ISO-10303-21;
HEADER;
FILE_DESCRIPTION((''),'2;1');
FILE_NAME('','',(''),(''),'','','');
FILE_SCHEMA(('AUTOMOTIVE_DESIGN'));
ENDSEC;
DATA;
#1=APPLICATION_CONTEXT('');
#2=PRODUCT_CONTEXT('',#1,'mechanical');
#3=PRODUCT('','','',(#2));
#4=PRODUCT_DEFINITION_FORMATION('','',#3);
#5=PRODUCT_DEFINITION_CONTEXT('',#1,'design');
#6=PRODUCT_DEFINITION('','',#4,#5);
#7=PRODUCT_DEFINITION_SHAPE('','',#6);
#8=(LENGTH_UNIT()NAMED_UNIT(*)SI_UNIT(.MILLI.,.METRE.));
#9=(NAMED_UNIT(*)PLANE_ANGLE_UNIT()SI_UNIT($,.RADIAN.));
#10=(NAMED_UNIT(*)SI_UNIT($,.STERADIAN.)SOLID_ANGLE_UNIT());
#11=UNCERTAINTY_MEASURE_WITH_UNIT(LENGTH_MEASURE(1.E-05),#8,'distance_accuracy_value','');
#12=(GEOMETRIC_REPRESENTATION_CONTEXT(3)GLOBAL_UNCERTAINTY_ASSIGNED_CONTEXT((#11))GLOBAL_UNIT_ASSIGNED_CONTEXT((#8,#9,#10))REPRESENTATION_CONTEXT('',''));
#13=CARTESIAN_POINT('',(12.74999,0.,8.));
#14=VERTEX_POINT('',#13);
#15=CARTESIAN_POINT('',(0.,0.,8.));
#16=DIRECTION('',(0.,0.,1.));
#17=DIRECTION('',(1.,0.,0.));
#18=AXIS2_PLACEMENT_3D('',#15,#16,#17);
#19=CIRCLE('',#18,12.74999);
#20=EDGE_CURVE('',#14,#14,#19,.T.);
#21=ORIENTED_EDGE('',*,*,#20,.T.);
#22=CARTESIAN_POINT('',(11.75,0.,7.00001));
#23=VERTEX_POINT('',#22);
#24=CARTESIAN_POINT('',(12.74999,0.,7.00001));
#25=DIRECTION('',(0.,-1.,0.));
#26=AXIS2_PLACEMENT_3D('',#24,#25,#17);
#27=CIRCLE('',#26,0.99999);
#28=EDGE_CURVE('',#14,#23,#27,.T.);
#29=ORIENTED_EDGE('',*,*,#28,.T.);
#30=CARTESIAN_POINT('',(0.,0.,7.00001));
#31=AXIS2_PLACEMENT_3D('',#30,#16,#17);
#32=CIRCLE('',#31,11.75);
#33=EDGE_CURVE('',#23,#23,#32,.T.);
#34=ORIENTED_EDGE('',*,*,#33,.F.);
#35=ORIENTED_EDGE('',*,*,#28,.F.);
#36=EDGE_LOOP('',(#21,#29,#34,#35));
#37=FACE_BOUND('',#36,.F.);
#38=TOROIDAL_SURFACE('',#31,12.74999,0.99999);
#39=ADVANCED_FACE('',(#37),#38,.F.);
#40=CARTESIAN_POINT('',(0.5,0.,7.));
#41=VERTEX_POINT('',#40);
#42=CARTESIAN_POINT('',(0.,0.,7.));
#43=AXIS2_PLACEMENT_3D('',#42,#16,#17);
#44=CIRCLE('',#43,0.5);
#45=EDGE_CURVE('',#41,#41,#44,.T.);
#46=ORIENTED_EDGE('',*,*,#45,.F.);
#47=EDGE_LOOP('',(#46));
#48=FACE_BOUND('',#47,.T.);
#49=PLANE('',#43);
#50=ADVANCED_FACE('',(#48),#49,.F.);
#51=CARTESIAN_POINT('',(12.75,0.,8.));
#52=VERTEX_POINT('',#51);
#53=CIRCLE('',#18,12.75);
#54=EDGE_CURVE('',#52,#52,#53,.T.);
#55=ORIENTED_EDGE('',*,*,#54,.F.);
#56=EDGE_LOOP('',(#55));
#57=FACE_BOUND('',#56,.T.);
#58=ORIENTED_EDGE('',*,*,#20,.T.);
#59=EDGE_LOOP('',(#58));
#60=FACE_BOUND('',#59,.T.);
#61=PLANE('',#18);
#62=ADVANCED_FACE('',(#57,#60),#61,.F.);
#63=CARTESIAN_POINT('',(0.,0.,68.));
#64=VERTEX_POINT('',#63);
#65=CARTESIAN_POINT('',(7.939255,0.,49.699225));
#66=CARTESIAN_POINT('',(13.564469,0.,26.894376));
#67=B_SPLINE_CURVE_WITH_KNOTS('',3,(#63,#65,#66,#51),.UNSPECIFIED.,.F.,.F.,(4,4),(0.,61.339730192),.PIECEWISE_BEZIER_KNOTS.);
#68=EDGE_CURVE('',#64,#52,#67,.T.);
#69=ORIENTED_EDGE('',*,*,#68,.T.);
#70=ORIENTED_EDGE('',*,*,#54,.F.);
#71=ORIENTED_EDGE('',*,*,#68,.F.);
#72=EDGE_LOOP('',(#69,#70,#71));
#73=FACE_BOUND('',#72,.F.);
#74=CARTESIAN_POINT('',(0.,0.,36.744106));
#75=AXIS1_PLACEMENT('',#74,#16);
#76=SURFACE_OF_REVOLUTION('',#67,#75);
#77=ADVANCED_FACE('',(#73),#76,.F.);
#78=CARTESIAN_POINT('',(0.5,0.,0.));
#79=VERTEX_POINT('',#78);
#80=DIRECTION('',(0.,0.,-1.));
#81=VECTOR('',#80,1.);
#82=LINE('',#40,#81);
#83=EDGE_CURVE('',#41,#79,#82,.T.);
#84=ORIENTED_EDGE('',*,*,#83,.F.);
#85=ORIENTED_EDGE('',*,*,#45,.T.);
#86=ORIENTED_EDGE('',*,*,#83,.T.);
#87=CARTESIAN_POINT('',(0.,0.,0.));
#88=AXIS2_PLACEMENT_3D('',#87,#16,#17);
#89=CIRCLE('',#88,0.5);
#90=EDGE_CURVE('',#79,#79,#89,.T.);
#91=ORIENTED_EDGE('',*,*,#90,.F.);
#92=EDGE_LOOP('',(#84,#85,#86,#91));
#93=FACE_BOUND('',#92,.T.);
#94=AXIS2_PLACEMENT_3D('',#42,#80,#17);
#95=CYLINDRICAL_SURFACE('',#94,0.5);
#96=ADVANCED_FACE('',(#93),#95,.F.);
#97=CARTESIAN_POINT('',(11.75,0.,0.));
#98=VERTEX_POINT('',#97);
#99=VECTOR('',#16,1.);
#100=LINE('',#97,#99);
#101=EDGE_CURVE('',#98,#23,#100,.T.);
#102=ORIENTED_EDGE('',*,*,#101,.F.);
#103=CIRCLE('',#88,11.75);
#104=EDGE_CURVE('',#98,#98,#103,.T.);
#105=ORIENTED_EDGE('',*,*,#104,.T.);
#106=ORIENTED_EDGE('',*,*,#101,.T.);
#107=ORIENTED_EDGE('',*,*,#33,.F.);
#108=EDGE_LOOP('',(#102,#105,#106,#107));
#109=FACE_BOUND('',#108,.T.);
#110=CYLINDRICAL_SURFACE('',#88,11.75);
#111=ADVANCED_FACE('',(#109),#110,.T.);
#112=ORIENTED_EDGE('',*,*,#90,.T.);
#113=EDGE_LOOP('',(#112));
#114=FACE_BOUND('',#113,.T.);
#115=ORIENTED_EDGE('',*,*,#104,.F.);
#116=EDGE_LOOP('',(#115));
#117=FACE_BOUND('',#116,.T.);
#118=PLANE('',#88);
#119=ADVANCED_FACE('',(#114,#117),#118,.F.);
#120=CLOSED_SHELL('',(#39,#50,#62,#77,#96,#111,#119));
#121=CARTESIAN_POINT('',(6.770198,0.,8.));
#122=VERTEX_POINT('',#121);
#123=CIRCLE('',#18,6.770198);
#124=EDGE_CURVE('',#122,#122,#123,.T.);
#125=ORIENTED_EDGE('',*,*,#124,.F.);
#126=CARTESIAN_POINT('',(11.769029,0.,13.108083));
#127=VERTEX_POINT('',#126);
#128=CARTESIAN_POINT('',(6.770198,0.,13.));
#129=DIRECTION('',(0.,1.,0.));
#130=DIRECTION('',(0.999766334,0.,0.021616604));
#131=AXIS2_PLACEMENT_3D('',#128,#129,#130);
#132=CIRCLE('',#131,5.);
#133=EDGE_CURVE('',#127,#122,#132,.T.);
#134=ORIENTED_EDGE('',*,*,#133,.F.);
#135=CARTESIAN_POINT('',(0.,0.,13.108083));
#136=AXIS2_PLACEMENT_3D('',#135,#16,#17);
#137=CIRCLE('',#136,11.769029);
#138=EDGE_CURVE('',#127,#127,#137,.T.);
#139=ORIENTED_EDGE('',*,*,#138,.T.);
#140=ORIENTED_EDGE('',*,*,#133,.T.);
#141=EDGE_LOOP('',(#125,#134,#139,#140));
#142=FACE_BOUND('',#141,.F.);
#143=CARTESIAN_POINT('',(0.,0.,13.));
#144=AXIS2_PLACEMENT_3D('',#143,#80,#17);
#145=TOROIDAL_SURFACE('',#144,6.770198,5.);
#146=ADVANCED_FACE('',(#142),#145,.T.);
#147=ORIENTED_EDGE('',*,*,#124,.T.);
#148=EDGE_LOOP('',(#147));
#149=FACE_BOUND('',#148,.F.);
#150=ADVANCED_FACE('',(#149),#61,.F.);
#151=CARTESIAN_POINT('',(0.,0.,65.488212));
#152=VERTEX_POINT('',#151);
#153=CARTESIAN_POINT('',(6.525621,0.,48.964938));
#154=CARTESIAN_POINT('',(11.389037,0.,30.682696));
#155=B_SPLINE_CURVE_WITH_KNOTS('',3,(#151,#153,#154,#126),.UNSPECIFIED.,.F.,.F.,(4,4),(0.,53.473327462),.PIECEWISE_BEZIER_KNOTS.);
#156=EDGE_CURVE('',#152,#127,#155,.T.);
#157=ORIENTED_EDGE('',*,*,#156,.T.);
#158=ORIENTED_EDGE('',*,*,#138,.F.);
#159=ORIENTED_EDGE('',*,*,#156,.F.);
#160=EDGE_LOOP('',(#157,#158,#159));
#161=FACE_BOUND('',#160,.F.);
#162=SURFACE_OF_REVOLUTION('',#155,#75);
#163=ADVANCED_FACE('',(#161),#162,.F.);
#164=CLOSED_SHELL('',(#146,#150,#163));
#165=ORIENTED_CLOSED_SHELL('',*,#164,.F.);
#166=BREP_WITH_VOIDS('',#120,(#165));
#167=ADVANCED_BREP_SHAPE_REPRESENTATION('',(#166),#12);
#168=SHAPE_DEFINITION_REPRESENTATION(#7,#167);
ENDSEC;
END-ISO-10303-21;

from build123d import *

# Parameters (mm, degrees)
F2_R = 0.99999


# Not quite as in the source:
# - a fillet or chamfer is up to 0.001 mm smaller than in the source, because OpenCascade refuses the exact size


with BuildPart() as f1:
    # F0 (on Front) → F1 (revolve)
    with BuildSketch(Plane.XZ):
        with BuildLine():
            add(Edge.make_bspline(
                [(0, 68), (7.9392548651, 49.6992245317), (13.5644692928, 26.8943756819), (12.75, 8)],
                knots=[0, 0, 0, 0, 61.3397301918, 61.3397301918, 61.3397301918, 61.3397301918], degree=3))
            Line((0, 68), (0, 65.4882118106))
            add(Edge.make_bspline(
                [(0, 65.4882118106), (6.5256207423, 48.9649383531), (11.3890371188, 30.6826956818), (11.7690293485, 13.1080830189)],
                knots=[0, 0, 0, 0, 53.4733274618, 53.4733274618, 53.4733274618, 53.4733274618], degree=3))
            add(Edge.make_bspline(
                [(11.7690293485, 13.1080830189), (11.8060056748, 11.3979306507), (11.8005290471, 9.6944787382), (11.75, 8)],
                knots=[53.4733274618, 53.4733274618, 53.4733274618, 53.4733274618, 58.6767159713, 58.6767159713, 58.6767159713, 58.6767159713], degree=3))
            Line((11.75, 8), (12.75, 8))
        make_face()
        Polygon((11.75, 0), (11.75, 8), (6.7701976789, 8), (6.6109633365, 8), (0, 8), (0, 7), (0.5, 7), (0.5, 0), align=None)
        with BuildLine():
            Line((6.7701976789, 8), (11.75, 8))
            add(Edge.make_bspline(
                [(11.7690293485, 13.1080830189), (11.8060056748, 11.3979306507), (11.8005290471, 9.6944787382), (11.75, 8)],
                knots=[53.4733274618, 53.4733274618, 53.4733274618, 53.4733274618, 58.6767159713, 58.6767159713, 58.6767159713, 58.6767159713], degree=3))
            ThreePointArc((11.7690293485, 13.1080830189), (10.3437403955, 9.5028879839), (6.7701976789, 8))
        make_face()
    revolve(axis=Axis((0, 0, 36.7441059053), (0, 0, 1)))

    # F2 (radius 1 in the source; OpenCascade refuses exactly that, so slightly less here)
    f2_edges = [f1.edges().sort_by_distance(p)[0] for p in [
        (-11.75, 0, 8),
    ]]
    fillet(f2_edges, radius=F2_R)


solid = f1.part
